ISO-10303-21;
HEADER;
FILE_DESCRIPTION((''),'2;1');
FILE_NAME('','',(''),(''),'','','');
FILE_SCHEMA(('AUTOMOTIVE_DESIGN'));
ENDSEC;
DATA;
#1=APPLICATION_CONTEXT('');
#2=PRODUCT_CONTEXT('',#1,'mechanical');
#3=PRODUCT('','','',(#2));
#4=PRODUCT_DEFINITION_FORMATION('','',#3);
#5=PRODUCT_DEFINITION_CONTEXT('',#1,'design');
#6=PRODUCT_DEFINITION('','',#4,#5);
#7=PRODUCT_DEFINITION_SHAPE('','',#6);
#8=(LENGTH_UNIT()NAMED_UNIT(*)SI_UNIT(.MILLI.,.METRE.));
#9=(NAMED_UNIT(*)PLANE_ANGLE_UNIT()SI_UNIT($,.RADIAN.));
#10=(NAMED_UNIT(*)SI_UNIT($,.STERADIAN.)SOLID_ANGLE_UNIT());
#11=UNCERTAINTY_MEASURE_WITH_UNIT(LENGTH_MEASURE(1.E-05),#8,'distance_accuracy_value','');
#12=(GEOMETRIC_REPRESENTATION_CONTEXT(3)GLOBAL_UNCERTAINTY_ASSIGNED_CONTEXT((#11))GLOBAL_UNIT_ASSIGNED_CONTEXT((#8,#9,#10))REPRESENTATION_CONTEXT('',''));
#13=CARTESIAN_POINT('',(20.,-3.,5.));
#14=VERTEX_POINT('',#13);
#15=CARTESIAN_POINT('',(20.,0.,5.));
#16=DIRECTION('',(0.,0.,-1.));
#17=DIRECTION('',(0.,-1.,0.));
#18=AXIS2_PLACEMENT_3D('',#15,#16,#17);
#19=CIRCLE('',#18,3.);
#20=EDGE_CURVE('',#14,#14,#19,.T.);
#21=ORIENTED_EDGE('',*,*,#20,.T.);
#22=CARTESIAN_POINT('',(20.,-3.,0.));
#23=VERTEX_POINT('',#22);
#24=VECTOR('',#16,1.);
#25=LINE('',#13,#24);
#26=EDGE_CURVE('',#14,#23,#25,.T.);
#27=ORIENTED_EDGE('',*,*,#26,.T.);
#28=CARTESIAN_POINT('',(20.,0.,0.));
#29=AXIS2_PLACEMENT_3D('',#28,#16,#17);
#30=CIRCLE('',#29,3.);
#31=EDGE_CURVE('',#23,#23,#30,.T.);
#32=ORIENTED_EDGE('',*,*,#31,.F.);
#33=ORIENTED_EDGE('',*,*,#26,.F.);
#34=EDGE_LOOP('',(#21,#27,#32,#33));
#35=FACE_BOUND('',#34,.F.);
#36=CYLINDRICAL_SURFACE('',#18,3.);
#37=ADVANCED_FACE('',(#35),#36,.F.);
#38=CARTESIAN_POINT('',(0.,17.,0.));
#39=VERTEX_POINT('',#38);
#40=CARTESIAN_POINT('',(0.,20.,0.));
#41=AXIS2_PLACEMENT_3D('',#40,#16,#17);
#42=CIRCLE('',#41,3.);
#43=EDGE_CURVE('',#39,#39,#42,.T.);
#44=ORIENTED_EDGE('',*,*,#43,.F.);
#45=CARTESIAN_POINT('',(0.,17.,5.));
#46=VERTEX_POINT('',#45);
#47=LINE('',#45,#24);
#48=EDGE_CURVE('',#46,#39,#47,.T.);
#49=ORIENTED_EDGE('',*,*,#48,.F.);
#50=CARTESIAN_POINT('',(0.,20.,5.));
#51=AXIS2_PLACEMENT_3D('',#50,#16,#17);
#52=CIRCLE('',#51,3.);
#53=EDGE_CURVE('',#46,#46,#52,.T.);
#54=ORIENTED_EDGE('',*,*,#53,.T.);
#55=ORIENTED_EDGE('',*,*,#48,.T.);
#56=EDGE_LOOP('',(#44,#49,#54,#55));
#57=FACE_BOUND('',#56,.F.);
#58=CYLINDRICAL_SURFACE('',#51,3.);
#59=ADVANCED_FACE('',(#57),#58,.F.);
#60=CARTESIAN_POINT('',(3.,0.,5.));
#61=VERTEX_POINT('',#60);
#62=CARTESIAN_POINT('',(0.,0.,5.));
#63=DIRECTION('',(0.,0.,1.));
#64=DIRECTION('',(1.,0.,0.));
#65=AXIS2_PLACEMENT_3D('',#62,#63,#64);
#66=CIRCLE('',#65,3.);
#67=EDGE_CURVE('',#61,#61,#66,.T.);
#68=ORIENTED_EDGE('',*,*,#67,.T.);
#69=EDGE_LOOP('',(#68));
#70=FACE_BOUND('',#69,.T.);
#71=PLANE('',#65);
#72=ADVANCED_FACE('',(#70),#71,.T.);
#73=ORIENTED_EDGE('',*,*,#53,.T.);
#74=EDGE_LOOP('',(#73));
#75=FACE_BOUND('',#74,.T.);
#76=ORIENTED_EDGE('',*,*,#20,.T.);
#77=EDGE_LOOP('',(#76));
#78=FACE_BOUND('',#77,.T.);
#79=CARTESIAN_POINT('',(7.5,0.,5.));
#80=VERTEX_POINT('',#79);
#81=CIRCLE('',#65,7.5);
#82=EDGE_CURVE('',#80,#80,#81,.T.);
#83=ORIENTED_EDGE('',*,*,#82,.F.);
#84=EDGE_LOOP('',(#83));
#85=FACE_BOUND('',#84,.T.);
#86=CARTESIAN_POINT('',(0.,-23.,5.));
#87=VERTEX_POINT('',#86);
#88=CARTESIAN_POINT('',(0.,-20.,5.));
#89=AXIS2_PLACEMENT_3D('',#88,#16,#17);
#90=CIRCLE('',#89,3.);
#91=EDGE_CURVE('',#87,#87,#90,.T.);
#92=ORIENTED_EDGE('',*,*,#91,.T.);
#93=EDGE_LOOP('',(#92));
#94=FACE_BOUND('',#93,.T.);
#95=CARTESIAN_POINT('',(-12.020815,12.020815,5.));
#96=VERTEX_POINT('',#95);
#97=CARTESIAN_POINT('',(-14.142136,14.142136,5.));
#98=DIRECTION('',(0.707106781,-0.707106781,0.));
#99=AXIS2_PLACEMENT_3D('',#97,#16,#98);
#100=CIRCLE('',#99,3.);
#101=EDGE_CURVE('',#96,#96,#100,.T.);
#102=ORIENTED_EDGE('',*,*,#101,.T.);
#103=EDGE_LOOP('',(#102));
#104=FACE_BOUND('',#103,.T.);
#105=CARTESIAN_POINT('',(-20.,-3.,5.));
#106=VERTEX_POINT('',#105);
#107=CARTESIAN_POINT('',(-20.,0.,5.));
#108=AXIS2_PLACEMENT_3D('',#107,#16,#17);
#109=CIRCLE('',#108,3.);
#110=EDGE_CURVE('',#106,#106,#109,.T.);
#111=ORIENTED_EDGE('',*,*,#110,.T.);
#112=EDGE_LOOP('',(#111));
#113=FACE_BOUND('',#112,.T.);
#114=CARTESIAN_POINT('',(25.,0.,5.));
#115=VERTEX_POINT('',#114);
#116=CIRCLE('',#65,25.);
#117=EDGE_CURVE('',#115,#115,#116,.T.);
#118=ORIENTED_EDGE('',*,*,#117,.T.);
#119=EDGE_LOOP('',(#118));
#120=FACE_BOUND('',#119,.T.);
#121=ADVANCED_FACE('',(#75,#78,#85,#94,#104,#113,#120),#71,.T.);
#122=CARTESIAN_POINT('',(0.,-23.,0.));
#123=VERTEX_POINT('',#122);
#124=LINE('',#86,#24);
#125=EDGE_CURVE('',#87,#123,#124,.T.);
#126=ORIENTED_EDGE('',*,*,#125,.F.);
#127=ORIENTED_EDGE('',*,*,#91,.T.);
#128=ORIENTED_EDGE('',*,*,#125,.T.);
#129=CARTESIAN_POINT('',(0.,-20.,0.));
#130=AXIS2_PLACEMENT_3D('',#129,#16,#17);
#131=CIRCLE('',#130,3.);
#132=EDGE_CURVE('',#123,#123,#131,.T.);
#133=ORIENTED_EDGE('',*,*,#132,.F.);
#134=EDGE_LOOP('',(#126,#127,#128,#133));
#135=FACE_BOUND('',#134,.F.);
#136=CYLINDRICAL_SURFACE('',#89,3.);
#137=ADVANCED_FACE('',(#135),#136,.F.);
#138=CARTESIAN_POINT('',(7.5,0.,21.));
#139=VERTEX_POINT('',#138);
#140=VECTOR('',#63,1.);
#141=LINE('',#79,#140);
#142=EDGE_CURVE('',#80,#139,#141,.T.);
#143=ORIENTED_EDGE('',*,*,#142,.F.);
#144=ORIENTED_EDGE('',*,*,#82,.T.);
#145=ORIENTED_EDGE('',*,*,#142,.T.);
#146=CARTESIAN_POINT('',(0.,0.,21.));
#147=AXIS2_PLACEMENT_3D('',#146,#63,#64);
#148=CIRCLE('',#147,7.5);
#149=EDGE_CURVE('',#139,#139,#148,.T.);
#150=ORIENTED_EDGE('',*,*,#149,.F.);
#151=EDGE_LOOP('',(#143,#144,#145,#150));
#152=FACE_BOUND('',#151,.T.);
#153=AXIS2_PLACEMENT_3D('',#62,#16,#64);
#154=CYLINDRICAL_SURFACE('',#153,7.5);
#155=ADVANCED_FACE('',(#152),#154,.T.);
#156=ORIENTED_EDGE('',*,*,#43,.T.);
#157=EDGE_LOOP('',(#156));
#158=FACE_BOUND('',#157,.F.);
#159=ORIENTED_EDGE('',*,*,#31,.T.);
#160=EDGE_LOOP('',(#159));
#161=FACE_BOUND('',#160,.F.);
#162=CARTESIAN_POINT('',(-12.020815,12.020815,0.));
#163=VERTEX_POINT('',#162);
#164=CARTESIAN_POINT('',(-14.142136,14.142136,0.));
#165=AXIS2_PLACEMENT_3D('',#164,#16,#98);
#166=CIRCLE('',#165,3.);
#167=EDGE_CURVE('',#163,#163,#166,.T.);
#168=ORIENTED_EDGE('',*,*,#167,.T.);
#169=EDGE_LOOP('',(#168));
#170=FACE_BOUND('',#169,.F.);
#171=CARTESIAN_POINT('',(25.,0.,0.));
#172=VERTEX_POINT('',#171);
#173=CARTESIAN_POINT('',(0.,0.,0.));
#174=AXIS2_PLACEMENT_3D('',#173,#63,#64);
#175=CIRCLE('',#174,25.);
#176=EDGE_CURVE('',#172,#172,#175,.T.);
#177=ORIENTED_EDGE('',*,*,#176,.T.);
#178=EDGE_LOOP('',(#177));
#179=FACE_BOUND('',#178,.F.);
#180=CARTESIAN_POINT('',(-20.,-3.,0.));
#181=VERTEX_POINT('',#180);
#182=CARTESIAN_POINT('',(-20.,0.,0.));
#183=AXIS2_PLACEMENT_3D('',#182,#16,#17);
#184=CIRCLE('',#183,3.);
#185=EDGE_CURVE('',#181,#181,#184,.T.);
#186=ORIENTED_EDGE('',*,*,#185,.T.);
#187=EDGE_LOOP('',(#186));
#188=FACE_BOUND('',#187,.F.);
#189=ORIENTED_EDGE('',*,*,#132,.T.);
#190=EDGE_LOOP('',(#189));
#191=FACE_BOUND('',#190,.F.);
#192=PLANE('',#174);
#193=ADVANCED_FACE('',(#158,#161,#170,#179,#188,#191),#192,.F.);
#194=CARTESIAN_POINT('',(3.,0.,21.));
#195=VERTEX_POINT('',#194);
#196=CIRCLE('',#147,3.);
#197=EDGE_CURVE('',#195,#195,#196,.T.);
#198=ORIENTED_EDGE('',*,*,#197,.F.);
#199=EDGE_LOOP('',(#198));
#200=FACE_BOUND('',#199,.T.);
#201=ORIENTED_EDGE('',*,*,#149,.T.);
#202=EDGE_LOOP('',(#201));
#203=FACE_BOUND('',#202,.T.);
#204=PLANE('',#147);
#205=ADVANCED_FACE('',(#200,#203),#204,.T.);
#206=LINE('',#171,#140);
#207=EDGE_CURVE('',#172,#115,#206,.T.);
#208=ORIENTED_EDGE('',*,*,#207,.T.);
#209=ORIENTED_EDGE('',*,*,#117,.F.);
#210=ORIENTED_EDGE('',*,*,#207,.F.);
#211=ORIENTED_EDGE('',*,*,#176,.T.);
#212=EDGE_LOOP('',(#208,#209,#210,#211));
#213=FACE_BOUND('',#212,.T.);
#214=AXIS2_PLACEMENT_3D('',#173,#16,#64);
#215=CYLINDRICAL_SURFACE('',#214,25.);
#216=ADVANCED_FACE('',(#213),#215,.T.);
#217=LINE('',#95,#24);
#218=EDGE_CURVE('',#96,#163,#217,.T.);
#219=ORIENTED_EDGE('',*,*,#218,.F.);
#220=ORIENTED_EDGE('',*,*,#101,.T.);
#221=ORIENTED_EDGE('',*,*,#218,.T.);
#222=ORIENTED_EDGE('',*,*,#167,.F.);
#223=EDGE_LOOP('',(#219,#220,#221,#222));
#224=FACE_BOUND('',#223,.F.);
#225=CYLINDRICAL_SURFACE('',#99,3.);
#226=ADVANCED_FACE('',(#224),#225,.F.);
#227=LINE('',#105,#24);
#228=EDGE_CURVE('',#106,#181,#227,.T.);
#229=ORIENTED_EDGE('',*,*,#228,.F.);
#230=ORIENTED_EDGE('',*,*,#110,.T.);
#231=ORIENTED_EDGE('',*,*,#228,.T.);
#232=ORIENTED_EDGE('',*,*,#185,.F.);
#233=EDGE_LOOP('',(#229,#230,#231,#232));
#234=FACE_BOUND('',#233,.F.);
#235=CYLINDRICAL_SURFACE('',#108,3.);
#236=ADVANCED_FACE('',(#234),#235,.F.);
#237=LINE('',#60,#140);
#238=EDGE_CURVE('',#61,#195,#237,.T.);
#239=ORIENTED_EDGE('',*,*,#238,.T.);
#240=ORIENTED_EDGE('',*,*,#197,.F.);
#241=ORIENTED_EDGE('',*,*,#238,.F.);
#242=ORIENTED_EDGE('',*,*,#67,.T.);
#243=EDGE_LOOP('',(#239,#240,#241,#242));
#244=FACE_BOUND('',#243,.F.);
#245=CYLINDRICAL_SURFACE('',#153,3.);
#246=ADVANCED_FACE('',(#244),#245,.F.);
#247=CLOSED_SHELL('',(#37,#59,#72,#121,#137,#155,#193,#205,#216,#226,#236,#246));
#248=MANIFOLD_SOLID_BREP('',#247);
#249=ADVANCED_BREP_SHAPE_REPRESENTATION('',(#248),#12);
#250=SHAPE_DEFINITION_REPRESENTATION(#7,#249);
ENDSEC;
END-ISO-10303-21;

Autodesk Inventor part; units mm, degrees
ref_plane "YZ Plane" through (0, 0, 0) normal (1, 0, 0) x (0, 1, 0)
ref_plane "XZ Plane" through (0, 0, 0) normal (0, 1, 0) x (-1, 0, 0)
ref_plane "XY Plane" through (0, 0, 0) normal (0, 0, 1) x (1, 0, 0)
sketch "Sketch1" plane through (0, 0, 0) normal (0, 0, 1) x (1, 0, 0)
  circle A0 centre (0, 0) radius 25
  dimension "d0" = 50
extrude "Extrusion1" add sketch "Sketch1" along normal blind 5
sketch "Sketch2" plane through (0, 0, 5) normal (0, 0, 1) x (1, 0, 0)
  circle A0 centre (0, 20) radius 3
  circle A1 centre (20, 0) radius 3
  circle A2 centre (-20, 0) radius 3
  circle A3 centre (0, -20) radius 3
  dimension "d4" = 6
  dimension "d5" = 6
  dimension "d6" = 6
  dimension "d7" = 6
hole "Hole1" at (-20, 0, 5) at (0, 20, 5) at (20, 0, 5) at (0, -20, 5) direction (0, 0, -1) diameter 6 end through all
thread "Thread1" size "M6x1" class "6H" standard "ANSI Metric M Profile" full length
thread "Thread2" size "M6x1" class "6H" standard "ANSI Metric M Profile" full length
thread "Thread3" size "M6x1" class "6H" standard "ANSI Metric M Profile" full length
thread "Thread4" size "M6x1" class "6H" standard "ANSI Metric M Profile" full length
pattern_circular "Circular Pattern1" count 2 over 45 about axis through (0, 0, 0) along (0, 0, 1) of "Hole1"
sketch "Sketch4" plane through (0, 0, 5) normal (0, 0, 1) x (1, 0, 0)
  circle A0 centre (14.1421, 14.1421) radius 3 projected
  circle A1 centre (14.1421, 14.1421) radius 3
  circle A2 centre (14.1421, -14.1421) radius 3 projected
  circle A3 centre (14.1421, -14.1421) radius 3
  circle A4 centre (-14.1421, -14.1421) radius 3 projected
  circle A5 centre (-14.1421, -14.1421) radius 3
  point P0 (0, 0)
extrude "Extrusion2" add sketch "Sketch4" against normal blind 5
sketch "Sketch5" plane through (0, 0, 5) normal (0, 0, 1) x (1, 0, 0)
  circle A0 centre (-14.1421, 14.1421) radius 3 projected
  circle A1 centre (20, 0) radius 3 projected
  circle A2 centre (-20, 0) radius 3 projected
  circle A3 centre (0, 20) radius 3 projected
  circle A4 centre (0, -20) radius 3 projected
  circle A5 centre (0, 0) radius 25 projected
  circle A6 centre (0, 0) radius 7.5
  circle A7 centre (0, 0) radius 3
  dimension "d29" = 15
  dimension "d30" = 6
extrude "Extrusion3" add sketch "Sketch5" along normal blind 16 contours A6
properties part number "Base"
